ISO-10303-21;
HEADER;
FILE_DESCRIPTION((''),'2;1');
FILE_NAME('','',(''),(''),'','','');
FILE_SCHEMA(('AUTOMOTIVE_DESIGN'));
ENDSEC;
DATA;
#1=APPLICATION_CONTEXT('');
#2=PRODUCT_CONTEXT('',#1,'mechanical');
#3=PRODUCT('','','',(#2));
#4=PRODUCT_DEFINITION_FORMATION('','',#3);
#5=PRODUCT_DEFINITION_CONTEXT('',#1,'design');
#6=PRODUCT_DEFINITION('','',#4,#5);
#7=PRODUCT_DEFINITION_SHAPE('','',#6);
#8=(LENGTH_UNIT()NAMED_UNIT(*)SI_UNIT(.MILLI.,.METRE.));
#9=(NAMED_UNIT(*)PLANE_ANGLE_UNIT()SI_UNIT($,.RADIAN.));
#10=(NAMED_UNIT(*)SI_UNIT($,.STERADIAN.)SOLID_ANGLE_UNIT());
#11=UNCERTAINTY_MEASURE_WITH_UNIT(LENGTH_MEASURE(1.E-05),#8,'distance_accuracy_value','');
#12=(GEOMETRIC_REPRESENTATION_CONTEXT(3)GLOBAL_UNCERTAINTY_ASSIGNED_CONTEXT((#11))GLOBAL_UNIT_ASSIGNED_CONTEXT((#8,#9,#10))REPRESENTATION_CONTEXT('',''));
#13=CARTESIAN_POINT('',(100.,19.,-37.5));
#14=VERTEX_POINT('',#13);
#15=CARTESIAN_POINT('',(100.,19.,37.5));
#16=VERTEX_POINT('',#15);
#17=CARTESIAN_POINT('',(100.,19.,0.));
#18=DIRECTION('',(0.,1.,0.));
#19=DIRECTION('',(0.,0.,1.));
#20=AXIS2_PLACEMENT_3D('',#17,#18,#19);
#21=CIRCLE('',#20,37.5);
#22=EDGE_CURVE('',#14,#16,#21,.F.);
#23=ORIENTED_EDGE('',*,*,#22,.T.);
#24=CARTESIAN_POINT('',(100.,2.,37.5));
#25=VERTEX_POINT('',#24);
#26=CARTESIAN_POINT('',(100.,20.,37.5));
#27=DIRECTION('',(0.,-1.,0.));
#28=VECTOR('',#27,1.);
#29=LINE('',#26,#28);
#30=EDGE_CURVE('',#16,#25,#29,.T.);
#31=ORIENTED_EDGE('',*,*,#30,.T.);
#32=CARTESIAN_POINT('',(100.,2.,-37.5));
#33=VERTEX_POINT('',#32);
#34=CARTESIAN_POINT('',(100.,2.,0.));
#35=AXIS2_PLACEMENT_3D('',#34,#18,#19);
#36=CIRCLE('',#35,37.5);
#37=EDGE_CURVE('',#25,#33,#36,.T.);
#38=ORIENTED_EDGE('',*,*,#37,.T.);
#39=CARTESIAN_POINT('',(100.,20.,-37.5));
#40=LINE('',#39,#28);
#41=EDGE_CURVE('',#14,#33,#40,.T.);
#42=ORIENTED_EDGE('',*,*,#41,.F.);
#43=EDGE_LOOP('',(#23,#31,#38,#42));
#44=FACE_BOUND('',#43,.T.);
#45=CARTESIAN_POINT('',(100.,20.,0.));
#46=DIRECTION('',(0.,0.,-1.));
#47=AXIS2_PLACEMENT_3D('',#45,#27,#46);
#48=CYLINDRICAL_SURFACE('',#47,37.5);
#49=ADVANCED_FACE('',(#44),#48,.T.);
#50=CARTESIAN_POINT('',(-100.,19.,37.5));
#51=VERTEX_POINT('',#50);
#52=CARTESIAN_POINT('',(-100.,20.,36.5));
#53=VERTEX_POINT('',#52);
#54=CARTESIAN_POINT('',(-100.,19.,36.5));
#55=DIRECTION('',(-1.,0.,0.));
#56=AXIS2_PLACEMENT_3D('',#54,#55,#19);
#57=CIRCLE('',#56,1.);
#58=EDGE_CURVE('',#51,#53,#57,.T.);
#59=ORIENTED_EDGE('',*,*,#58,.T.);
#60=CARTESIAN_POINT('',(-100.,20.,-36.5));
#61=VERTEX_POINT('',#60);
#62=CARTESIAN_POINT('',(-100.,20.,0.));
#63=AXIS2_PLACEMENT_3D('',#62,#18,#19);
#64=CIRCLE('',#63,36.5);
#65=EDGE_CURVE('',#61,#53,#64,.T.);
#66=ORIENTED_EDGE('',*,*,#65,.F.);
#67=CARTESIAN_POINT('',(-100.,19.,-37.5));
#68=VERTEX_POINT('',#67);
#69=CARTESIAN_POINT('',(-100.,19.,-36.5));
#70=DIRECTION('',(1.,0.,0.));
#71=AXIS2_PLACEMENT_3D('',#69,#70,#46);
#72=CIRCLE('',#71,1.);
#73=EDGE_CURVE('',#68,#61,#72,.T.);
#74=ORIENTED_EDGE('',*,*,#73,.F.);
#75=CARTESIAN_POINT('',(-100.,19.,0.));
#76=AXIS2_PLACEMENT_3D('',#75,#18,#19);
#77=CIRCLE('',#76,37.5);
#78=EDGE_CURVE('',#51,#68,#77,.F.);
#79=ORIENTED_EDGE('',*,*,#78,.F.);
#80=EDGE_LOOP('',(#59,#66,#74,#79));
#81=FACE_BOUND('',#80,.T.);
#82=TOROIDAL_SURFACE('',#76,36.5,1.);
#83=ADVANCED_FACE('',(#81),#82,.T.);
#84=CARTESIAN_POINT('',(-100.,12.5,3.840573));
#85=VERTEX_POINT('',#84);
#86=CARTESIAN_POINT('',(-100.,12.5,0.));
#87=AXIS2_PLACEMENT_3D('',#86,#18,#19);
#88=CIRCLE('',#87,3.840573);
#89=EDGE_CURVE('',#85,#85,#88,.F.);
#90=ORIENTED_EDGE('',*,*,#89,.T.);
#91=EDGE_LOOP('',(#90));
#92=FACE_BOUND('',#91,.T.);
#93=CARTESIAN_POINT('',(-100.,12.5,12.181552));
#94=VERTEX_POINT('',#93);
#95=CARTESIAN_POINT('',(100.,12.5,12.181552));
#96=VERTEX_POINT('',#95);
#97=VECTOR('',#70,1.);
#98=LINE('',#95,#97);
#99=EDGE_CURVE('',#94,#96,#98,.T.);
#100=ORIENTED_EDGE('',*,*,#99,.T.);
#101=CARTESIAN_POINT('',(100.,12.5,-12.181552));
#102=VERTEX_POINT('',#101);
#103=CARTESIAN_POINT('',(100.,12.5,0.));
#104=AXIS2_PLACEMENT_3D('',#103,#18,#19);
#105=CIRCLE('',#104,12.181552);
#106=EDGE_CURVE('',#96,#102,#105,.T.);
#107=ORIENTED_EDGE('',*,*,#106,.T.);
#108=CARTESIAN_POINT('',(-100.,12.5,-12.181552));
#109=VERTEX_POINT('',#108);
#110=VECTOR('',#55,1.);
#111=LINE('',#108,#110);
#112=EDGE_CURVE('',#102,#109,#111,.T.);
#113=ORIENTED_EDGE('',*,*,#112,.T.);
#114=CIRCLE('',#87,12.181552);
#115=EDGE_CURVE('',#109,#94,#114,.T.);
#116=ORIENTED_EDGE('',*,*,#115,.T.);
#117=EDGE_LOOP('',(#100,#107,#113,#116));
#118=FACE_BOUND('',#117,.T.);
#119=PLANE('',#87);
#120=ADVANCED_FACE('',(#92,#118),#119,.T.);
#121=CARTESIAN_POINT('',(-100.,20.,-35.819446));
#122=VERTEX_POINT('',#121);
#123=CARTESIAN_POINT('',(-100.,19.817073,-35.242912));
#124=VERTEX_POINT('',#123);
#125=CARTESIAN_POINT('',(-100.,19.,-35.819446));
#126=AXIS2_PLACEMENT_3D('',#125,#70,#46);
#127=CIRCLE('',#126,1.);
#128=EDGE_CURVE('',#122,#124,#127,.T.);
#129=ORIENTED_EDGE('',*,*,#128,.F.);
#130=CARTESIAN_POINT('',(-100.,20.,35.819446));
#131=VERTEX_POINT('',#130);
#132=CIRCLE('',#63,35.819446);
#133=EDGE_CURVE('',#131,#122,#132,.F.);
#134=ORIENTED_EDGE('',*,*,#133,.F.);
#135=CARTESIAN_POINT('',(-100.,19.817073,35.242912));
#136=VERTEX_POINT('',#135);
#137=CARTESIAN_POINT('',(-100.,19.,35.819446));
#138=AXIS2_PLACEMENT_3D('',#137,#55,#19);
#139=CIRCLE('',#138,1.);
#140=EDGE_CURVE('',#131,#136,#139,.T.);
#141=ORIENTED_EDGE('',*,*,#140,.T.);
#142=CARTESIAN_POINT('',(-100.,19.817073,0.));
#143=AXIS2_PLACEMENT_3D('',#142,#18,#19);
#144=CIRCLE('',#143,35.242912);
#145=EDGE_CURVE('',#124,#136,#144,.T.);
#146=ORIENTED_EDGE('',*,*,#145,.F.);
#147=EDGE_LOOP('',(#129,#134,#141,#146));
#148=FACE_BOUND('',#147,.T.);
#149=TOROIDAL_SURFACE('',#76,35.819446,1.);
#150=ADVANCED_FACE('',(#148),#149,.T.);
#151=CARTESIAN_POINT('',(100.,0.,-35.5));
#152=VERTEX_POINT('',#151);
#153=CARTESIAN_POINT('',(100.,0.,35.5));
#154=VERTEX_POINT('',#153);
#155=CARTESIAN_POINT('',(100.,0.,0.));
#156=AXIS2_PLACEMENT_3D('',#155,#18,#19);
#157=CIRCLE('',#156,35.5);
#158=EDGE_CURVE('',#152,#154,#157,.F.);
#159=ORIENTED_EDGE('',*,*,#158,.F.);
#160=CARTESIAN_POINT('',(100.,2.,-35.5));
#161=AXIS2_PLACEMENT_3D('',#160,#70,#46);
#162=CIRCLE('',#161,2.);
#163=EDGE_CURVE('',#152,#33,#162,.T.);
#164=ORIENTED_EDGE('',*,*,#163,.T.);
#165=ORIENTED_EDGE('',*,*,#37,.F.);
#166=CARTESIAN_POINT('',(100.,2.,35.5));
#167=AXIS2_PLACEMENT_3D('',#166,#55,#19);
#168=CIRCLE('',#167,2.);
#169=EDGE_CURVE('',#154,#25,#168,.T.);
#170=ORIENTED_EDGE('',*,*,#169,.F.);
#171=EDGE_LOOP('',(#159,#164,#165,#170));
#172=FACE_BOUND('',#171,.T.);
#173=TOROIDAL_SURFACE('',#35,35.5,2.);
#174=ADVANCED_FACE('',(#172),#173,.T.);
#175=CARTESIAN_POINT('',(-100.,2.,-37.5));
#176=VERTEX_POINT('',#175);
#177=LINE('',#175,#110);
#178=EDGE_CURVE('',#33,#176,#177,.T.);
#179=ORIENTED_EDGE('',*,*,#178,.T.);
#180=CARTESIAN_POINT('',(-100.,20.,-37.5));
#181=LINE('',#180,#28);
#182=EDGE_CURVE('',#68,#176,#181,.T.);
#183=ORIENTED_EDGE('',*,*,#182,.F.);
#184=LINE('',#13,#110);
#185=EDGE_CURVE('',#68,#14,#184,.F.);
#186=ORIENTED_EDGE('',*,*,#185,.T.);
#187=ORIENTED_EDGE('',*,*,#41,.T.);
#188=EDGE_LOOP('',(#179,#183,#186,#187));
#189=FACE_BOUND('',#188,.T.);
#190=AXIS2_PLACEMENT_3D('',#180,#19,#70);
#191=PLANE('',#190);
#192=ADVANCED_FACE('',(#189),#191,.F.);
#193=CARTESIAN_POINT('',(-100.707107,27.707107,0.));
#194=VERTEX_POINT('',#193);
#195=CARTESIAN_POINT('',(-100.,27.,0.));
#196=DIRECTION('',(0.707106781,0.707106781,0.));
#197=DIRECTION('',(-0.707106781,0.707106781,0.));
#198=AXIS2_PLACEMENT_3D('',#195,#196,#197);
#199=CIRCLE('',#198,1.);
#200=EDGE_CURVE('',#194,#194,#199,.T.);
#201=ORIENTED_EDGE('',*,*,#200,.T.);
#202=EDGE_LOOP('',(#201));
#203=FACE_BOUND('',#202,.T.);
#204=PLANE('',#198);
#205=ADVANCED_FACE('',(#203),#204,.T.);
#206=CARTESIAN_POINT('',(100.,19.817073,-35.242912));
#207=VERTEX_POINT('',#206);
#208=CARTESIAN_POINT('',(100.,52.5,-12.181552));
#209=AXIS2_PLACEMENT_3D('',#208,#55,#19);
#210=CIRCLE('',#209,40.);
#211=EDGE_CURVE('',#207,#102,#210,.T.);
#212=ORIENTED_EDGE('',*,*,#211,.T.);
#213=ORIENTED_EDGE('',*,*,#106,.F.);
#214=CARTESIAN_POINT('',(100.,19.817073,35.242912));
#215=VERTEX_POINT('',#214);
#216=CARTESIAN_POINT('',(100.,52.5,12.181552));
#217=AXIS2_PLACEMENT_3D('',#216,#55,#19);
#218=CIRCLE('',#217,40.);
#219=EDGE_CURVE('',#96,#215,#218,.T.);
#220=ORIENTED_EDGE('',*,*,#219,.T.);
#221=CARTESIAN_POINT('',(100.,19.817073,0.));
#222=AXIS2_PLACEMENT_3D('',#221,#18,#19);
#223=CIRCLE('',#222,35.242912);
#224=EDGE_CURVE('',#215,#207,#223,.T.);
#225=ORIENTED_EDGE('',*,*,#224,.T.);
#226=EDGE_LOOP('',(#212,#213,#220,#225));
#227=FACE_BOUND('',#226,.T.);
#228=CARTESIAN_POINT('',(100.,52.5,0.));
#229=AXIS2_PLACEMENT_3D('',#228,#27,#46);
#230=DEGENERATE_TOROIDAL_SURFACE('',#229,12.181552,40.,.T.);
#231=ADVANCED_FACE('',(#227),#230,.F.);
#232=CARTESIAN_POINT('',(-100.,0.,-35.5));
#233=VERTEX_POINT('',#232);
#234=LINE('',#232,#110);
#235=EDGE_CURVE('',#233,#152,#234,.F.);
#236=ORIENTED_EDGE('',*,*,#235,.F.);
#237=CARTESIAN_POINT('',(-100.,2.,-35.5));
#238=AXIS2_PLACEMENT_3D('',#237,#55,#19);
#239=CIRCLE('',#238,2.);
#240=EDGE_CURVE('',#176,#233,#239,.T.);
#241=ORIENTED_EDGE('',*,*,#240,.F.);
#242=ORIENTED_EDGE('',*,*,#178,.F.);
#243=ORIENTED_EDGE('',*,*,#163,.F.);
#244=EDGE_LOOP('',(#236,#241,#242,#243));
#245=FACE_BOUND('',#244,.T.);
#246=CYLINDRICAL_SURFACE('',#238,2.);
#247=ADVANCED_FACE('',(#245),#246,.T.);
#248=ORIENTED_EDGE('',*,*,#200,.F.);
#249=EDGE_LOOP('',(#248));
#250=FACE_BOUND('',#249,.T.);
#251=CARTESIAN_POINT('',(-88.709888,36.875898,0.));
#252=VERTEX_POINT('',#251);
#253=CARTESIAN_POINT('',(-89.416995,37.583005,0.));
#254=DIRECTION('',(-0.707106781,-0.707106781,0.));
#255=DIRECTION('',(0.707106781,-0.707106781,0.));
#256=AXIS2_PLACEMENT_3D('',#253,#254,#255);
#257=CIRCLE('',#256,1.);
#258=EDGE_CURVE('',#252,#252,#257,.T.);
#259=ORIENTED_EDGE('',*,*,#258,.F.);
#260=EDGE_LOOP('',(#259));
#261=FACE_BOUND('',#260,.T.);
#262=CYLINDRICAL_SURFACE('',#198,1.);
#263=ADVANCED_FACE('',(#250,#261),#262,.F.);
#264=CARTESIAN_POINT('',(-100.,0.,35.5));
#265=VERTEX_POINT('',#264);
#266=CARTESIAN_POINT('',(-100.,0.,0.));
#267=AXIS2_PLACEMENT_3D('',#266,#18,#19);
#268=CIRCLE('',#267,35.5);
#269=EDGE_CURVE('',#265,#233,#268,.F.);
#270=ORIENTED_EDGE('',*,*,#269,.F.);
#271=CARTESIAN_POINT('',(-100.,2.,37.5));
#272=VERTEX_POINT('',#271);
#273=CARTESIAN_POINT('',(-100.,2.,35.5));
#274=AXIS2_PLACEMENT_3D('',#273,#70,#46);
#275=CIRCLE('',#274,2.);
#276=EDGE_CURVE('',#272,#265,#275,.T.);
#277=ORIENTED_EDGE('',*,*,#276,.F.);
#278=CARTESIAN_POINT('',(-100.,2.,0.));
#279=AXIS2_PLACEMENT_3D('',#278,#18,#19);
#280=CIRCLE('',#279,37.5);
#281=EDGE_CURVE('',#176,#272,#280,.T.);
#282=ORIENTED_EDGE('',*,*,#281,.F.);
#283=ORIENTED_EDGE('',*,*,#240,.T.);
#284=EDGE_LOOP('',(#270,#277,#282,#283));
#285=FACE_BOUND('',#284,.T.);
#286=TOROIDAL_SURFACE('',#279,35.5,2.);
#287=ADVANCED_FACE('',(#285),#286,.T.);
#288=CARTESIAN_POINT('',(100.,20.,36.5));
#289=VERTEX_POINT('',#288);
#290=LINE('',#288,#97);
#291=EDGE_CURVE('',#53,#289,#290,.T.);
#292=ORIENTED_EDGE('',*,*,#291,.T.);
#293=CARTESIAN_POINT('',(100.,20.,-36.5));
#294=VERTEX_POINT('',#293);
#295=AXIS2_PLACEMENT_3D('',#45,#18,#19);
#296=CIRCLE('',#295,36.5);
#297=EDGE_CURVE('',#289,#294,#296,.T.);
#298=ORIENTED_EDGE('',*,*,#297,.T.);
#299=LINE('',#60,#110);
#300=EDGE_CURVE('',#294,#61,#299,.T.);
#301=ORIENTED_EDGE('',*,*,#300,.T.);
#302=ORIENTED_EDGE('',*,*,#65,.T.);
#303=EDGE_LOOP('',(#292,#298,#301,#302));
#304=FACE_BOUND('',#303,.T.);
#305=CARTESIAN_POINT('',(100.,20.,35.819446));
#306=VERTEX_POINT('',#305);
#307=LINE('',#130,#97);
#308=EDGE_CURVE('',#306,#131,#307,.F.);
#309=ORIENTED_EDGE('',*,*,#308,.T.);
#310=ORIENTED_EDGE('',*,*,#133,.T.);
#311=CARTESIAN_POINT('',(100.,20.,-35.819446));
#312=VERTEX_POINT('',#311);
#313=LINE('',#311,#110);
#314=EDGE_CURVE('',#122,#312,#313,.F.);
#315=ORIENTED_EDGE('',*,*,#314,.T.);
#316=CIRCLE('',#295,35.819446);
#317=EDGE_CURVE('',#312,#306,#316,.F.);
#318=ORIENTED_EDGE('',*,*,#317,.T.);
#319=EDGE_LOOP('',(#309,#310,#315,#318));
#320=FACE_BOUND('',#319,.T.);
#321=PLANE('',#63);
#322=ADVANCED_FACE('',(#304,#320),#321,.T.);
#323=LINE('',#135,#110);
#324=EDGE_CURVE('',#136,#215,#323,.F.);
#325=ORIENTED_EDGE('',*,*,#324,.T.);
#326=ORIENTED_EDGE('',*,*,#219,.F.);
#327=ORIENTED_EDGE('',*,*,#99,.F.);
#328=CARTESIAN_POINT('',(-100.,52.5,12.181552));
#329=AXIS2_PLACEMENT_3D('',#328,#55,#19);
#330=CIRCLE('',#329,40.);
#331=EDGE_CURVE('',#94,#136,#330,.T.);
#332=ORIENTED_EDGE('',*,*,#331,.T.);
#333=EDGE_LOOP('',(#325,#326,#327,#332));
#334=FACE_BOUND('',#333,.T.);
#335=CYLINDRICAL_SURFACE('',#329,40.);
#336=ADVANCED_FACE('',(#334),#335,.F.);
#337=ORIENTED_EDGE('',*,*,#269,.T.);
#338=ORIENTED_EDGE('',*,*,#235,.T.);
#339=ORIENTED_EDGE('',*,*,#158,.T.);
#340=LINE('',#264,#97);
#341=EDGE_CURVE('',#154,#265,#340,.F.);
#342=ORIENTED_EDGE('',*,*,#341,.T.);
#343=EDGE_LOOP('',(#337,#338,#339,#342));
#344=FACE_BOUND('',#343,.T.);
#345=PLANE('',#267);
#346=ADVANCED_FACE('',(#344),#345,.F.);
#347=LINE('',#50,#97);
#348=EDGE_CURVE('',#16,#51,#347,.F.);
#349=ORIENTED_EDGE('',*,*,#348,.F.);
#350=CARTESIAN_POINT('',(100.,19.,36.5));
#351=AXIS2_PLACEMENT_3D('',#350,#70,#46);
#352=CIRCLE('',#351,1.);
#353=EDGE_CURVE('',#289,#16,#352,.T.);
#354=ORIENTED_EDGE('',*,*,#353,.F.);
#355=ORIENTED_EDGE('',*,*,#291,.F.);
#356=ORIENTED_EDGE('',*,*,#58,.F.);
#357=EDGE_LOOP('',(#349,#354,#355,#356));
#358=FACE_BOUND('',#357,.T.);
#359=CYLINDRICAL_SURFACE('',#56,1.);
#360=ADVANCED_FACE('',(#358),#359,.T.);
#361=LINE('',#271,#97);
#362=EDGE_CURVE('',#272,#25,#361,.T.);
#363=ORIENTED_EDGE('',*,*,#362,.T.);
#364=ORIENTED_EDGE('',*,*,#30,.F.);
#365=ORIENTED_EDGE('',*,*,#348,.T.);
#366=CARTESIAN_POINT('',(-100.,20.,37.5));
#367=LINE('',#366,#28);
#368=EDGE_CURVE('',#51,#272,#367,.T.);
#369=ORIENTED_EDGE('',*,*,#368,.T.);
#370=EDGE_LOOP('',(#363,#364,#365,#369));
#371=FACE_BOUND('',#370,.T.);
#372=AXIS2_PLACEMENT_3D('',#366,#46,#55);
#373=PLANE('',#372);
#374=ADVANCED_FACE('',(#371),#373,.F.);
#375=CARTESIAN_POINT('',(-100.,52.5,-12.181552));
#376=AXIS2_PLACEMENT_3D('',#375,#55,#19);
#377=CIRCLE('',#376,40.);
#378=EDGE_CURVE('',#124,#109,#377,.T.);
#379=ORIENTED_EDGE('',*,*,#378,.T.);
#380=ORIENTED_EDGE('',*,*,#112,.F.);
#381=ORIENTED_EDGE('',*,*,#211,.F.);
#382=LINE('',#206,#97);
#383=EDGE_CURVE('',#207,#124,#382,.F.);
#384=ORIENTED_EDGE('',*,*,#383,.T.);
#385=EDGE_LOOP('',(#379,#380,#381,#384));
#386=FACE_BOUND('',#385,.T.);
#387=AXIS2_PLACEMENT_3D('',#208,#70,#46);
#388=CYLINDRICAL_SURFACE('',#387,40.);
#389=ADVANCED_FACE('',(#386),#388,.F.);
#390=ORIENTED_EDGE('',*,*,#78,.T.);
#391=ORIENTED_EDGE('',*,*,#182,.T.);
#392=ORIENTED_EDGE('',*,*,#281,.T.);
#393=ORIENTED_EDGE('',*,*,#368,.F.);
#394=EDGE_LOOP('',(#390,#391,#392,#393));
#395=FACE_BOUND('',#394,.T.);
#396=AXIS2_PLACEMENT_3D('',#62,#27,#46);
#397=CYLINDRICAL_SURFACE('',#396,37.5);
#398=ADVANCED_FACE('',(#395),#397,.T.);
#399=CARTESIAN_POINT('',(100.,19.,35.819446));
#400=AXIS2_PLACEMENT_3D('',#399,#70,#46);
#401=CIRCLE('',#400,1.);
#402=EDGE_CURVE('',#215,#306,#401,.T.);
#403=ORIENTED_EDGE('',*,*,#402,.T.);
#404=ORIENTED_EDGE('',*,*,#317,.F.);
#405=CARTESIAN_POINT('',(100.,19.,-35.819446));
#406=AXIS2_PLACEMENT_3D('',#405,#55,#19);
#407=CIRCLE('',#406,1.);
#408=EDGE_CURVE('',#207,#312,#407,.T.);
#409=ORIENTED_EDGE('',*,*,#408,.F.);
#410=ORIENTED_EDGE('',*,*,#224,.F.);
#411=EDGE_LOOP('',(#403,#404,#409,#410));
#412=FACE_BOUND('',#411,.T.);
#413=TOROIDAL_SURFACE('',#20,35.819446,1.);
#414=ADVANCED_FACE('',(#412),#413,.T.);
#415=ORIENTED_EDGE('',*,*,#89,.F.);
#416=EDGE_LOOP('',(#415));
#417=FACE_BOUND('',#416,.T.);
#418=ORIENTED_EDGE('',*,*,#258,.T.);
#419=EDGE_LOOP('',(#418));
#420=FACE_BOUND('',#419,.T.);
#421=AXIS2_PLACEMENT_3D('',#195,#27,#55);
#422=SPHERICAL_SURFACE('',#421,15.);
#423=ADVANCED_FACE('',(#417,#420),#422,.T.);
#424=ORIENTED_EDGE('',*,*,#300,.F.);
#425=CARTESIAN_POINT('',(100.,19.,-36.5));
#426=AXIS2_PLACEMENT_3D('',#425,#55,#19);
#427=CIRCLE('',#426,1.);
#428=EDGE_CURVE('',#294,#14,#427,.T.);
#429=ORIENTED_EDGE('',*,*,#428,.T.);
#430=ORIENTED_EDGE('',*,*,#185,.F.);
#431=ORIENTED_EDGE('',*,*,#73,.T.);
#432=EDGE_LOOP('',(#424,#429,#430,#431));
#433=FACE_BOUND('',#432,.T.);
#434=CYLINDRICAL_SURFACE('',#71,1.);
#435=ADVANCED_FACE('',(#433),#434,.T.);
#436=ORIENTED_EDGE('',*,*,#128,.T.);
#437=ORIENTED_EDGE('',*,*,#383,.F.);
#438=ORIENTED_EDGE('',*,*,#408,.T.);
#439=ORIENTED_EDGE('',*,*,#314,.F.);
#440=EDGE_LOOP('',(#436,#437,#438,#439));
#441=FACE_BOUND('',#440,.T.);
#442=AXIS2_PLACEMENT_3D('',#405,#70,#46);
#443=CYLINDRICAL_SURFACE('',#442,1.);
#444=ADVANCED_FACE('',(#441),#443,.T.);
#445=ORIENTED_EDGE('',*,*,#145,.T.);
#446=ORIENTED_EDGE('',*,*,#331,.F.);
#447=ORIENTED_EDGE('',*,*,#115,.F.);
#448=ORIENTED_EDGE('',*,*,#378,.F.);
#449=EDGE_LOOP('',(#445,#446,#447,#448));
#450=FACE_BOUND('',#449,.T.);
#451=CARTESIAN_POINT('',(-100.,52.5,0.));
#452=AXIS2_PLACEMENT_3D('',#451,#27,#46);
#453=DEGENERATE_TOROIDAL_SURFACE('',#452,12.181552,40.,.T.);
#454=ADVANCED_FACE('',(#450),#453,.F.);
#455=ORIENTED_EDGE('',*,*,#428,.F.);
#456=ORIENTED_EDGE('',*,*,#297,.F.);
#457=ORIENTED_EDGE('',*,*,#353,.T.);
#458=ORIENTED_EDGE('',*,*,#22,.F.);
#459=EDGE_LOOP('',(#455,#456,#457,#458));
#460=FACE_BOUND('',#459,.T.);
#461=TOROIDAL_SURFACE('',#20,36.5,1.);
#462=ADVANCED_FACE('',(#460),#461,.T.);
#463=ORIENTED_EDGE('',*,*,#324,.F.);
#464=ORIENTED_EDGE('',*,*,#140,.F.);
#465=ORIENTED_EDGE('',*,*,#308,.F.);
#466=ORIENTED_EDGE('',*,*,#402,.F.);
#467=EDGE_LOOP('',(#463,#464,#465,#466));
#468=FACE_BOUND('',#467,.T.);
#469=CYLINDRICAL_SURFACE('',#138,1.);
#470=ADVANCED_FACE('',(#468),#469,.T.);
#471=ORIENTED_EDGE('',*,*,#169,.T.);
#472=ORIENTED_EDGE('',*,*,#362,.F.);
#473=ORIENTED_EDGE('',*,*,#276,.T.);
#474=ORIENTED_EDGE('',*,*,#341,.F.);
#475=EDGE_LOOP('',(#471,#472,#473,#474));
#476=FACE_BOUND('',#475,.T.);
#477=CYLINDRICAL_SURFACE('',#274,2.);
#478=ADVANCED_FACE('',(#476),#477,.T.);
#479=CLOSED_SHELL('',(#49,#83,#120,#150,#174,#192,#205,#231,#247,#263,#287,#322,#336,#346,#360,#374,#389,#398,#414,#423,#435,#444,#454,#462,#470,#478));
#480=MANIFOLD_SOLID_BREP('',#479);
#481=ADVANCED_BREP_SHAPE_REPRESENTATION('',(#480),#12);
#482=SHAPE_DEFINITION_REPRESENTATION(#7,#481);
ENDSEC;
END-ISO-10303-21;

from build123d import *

# Parameters (mm, degrees)
BOSS_EXTRUDE1_DEPTH = 20
CUT_EXTRUDE1_DEPTH  = 7.5
FILLET1_R           = 40
FILLET2_R           = 1
FILLET3_R           = 2
SKETCH6_R           = 1
CUT_EXTRUDE2_DEPTH  = 15


with BuildPart() as part:
    # Sketch1 → Boss-Extrude1 (new body)
    with BuildSketch(Plane(origin=(0, 0, 0), x_dir=(1, 0, 0), z_dir=(0, 1, 0))):
        with BuildLine():
            Line((-100, 37.5), (100, 37.5))
            ThreePointArc((100, 37.5), (137.5, 0), (100, -37.5))
            Line((100, -37.5), (-100, -37.5))
            ThreePointArc((-100, -37.5), (-137.5, 0), (-100, 37.5))
        make_face()
    extrude(amount=BOSS_EXTRUDE1_DEPTH)

    # Sketch2 → Cut-Extrude1 (cut)
    with BuildSketch(Plane(origin=(0, 20, 0), x_dir=(1, 0, 0), z_dir=(0, 1, 0))):
        with BuildLine():
            Line((-100, -35.5), (100, -35.5))
            ThreePointArc((100, -35.5), (135.5, 0), (100, 35.5))
            Line((100, 35.5), (-100, 35.5))
            ThreePointArc((-100, 35.5), (-135.5, 0), (-100, -35.5))
        make_face()
    extrude(amount=-CUT_EXTRUDE1_DEPTH, mode=Mode.SUBTRACT)

    # Fillet1
    # the kernel refuses this fillet: 40 mm, written as the material it adds along each edge
    with BuildSketch(Plane(origin=(100, 12.5, -35.5), x_dir=(0, 1, 0), z_dir=(-1, 0, 0)), Plane(origin=(-100, 12.5, 35.5), x_dir=(0, 1, 0), z_dir=(1, 0, 0))) as fillet1_piece_1:
        with BuildLine():
            CenterArc((40, -23.318447633), FILLET1_R, 144.340912304, 35.659087696)
            Line((0, -23.318447633), (-0.8, -23.318447633))
            Line((-0.8, -23.318447633), (-0.8, 0))
            Line((-0.8, 0), (0, 0.8))
            ThreePointArc((0, 0.8), (3.75, 0.8), (6.85, 0.466368953))
            Line((6.85, 0.466368953), (7.5, 0))
        make_face()
    extrude(amount=200)
    with BuildSketch(Plane(origin=(-100, 12.5, 0), x_dir=(0, 0, -1), z_dir=(1, 0, 0))) as fillet1_piece_2:
        with BuildLine():
            CenterArc((12.181552367, 40), FILLET1_R, 270, 35.659087696)
            Line((12.181552367, 0), (12.181552367, -0.8))
            Line((12.181552367, -0.8), (35.5, -0.8))
            Line((35.5, -0.8), (36.3, 0))
            ThreePointArc((36.3, 0), (36.3, 3.75), (35.966368953, 6.85))
            Line((35.966368953, 6.85), (35.5, 7.5))
        make_face()
    revolve(axis=Axis((-100, 12.5, 0), (0, 1, 0)), revolution_arc=180)
    with BuildSketch(Plane(origin=(100, 12.5, 0), x_dir=(0, 0, 1), z_dir=(-1, 0, 0))) as fillet1_piece_3:
        with BuildLine():
            CenterArc((12.181552367, 40), FILLET1_R, 270, 35.659087696)
            Line((12.181552367, 0), (12.181552367, -0.8))
            Line((12.181552367, -0.8), (35.5, -0.8))
            Line((35.5, -0.8), (36.3, 0))
            ThreePointArc((36.3, 0), (36.3, 3.75), (35.966368953, 6.85))
            Line((35.966368953, 6.85), (35.5, 7.5))
        make_face()
    revolve(axis=Axis((100, 12.5, 0), (0, 1, 0)), revolution_arc=180)

    # Fillet2
    fillet2_edges = [part.edges().sort_by_distance(p)[0] for p in [
        (137.5, 20, 0),
        (0, 20, -37.5),
        (-135.5, 20, 0),
        (0, 20, 35.5),
        (135.5, 20, 0),
        (0, 20, -35.5),
        (-137.5, 20, 0),
        (0, 20, 37.5),
    ]]
    fillet(fillet2_edges, radius=FILLET2_R)

    # Fillet3
    fillet3_edges = [part.edges().sort_by_distance(p)[0] for p in [
        (0, 0, -37.5),
        (137.5, 0, 0),
        (0, 0, 37.5),
        (-137.5, 0, 0),
    ]]
    fillet(fillet3_edges, radius=FILLET3_R)

    # Sketch4 → Revolve1 (revolve)
    with BuildSketch(Plane.XY):
        with BuildLine():
            Line((-100, 12), (-100, 42))
            ThreePointArc((-100, 42), (-115, 27), (-100, 12))
        make_face()
    revolve(axis=Axis((-100, 12, 0), (0, 1, 0)))

    # Sketch6 → Cut-Extrude2 (cut)
    with BuildSketch(Plane(origin=(-25.893398282, -25.893398282, 0), x_dir=(0.7071067811865488, -0.7071067811865464, 0), z_dir=(0.7071067811865464, 0.7071067811865488, 0))):
        with Locations(Location((-89.802561211, 0, 0), (0, 0, 180))):
            Circle(SKETCH6_R)
    extrude(amount=-CUT_EXTRUDE2_DEPTH, mode=Mode.SUBTRACT)


solid = part.part
